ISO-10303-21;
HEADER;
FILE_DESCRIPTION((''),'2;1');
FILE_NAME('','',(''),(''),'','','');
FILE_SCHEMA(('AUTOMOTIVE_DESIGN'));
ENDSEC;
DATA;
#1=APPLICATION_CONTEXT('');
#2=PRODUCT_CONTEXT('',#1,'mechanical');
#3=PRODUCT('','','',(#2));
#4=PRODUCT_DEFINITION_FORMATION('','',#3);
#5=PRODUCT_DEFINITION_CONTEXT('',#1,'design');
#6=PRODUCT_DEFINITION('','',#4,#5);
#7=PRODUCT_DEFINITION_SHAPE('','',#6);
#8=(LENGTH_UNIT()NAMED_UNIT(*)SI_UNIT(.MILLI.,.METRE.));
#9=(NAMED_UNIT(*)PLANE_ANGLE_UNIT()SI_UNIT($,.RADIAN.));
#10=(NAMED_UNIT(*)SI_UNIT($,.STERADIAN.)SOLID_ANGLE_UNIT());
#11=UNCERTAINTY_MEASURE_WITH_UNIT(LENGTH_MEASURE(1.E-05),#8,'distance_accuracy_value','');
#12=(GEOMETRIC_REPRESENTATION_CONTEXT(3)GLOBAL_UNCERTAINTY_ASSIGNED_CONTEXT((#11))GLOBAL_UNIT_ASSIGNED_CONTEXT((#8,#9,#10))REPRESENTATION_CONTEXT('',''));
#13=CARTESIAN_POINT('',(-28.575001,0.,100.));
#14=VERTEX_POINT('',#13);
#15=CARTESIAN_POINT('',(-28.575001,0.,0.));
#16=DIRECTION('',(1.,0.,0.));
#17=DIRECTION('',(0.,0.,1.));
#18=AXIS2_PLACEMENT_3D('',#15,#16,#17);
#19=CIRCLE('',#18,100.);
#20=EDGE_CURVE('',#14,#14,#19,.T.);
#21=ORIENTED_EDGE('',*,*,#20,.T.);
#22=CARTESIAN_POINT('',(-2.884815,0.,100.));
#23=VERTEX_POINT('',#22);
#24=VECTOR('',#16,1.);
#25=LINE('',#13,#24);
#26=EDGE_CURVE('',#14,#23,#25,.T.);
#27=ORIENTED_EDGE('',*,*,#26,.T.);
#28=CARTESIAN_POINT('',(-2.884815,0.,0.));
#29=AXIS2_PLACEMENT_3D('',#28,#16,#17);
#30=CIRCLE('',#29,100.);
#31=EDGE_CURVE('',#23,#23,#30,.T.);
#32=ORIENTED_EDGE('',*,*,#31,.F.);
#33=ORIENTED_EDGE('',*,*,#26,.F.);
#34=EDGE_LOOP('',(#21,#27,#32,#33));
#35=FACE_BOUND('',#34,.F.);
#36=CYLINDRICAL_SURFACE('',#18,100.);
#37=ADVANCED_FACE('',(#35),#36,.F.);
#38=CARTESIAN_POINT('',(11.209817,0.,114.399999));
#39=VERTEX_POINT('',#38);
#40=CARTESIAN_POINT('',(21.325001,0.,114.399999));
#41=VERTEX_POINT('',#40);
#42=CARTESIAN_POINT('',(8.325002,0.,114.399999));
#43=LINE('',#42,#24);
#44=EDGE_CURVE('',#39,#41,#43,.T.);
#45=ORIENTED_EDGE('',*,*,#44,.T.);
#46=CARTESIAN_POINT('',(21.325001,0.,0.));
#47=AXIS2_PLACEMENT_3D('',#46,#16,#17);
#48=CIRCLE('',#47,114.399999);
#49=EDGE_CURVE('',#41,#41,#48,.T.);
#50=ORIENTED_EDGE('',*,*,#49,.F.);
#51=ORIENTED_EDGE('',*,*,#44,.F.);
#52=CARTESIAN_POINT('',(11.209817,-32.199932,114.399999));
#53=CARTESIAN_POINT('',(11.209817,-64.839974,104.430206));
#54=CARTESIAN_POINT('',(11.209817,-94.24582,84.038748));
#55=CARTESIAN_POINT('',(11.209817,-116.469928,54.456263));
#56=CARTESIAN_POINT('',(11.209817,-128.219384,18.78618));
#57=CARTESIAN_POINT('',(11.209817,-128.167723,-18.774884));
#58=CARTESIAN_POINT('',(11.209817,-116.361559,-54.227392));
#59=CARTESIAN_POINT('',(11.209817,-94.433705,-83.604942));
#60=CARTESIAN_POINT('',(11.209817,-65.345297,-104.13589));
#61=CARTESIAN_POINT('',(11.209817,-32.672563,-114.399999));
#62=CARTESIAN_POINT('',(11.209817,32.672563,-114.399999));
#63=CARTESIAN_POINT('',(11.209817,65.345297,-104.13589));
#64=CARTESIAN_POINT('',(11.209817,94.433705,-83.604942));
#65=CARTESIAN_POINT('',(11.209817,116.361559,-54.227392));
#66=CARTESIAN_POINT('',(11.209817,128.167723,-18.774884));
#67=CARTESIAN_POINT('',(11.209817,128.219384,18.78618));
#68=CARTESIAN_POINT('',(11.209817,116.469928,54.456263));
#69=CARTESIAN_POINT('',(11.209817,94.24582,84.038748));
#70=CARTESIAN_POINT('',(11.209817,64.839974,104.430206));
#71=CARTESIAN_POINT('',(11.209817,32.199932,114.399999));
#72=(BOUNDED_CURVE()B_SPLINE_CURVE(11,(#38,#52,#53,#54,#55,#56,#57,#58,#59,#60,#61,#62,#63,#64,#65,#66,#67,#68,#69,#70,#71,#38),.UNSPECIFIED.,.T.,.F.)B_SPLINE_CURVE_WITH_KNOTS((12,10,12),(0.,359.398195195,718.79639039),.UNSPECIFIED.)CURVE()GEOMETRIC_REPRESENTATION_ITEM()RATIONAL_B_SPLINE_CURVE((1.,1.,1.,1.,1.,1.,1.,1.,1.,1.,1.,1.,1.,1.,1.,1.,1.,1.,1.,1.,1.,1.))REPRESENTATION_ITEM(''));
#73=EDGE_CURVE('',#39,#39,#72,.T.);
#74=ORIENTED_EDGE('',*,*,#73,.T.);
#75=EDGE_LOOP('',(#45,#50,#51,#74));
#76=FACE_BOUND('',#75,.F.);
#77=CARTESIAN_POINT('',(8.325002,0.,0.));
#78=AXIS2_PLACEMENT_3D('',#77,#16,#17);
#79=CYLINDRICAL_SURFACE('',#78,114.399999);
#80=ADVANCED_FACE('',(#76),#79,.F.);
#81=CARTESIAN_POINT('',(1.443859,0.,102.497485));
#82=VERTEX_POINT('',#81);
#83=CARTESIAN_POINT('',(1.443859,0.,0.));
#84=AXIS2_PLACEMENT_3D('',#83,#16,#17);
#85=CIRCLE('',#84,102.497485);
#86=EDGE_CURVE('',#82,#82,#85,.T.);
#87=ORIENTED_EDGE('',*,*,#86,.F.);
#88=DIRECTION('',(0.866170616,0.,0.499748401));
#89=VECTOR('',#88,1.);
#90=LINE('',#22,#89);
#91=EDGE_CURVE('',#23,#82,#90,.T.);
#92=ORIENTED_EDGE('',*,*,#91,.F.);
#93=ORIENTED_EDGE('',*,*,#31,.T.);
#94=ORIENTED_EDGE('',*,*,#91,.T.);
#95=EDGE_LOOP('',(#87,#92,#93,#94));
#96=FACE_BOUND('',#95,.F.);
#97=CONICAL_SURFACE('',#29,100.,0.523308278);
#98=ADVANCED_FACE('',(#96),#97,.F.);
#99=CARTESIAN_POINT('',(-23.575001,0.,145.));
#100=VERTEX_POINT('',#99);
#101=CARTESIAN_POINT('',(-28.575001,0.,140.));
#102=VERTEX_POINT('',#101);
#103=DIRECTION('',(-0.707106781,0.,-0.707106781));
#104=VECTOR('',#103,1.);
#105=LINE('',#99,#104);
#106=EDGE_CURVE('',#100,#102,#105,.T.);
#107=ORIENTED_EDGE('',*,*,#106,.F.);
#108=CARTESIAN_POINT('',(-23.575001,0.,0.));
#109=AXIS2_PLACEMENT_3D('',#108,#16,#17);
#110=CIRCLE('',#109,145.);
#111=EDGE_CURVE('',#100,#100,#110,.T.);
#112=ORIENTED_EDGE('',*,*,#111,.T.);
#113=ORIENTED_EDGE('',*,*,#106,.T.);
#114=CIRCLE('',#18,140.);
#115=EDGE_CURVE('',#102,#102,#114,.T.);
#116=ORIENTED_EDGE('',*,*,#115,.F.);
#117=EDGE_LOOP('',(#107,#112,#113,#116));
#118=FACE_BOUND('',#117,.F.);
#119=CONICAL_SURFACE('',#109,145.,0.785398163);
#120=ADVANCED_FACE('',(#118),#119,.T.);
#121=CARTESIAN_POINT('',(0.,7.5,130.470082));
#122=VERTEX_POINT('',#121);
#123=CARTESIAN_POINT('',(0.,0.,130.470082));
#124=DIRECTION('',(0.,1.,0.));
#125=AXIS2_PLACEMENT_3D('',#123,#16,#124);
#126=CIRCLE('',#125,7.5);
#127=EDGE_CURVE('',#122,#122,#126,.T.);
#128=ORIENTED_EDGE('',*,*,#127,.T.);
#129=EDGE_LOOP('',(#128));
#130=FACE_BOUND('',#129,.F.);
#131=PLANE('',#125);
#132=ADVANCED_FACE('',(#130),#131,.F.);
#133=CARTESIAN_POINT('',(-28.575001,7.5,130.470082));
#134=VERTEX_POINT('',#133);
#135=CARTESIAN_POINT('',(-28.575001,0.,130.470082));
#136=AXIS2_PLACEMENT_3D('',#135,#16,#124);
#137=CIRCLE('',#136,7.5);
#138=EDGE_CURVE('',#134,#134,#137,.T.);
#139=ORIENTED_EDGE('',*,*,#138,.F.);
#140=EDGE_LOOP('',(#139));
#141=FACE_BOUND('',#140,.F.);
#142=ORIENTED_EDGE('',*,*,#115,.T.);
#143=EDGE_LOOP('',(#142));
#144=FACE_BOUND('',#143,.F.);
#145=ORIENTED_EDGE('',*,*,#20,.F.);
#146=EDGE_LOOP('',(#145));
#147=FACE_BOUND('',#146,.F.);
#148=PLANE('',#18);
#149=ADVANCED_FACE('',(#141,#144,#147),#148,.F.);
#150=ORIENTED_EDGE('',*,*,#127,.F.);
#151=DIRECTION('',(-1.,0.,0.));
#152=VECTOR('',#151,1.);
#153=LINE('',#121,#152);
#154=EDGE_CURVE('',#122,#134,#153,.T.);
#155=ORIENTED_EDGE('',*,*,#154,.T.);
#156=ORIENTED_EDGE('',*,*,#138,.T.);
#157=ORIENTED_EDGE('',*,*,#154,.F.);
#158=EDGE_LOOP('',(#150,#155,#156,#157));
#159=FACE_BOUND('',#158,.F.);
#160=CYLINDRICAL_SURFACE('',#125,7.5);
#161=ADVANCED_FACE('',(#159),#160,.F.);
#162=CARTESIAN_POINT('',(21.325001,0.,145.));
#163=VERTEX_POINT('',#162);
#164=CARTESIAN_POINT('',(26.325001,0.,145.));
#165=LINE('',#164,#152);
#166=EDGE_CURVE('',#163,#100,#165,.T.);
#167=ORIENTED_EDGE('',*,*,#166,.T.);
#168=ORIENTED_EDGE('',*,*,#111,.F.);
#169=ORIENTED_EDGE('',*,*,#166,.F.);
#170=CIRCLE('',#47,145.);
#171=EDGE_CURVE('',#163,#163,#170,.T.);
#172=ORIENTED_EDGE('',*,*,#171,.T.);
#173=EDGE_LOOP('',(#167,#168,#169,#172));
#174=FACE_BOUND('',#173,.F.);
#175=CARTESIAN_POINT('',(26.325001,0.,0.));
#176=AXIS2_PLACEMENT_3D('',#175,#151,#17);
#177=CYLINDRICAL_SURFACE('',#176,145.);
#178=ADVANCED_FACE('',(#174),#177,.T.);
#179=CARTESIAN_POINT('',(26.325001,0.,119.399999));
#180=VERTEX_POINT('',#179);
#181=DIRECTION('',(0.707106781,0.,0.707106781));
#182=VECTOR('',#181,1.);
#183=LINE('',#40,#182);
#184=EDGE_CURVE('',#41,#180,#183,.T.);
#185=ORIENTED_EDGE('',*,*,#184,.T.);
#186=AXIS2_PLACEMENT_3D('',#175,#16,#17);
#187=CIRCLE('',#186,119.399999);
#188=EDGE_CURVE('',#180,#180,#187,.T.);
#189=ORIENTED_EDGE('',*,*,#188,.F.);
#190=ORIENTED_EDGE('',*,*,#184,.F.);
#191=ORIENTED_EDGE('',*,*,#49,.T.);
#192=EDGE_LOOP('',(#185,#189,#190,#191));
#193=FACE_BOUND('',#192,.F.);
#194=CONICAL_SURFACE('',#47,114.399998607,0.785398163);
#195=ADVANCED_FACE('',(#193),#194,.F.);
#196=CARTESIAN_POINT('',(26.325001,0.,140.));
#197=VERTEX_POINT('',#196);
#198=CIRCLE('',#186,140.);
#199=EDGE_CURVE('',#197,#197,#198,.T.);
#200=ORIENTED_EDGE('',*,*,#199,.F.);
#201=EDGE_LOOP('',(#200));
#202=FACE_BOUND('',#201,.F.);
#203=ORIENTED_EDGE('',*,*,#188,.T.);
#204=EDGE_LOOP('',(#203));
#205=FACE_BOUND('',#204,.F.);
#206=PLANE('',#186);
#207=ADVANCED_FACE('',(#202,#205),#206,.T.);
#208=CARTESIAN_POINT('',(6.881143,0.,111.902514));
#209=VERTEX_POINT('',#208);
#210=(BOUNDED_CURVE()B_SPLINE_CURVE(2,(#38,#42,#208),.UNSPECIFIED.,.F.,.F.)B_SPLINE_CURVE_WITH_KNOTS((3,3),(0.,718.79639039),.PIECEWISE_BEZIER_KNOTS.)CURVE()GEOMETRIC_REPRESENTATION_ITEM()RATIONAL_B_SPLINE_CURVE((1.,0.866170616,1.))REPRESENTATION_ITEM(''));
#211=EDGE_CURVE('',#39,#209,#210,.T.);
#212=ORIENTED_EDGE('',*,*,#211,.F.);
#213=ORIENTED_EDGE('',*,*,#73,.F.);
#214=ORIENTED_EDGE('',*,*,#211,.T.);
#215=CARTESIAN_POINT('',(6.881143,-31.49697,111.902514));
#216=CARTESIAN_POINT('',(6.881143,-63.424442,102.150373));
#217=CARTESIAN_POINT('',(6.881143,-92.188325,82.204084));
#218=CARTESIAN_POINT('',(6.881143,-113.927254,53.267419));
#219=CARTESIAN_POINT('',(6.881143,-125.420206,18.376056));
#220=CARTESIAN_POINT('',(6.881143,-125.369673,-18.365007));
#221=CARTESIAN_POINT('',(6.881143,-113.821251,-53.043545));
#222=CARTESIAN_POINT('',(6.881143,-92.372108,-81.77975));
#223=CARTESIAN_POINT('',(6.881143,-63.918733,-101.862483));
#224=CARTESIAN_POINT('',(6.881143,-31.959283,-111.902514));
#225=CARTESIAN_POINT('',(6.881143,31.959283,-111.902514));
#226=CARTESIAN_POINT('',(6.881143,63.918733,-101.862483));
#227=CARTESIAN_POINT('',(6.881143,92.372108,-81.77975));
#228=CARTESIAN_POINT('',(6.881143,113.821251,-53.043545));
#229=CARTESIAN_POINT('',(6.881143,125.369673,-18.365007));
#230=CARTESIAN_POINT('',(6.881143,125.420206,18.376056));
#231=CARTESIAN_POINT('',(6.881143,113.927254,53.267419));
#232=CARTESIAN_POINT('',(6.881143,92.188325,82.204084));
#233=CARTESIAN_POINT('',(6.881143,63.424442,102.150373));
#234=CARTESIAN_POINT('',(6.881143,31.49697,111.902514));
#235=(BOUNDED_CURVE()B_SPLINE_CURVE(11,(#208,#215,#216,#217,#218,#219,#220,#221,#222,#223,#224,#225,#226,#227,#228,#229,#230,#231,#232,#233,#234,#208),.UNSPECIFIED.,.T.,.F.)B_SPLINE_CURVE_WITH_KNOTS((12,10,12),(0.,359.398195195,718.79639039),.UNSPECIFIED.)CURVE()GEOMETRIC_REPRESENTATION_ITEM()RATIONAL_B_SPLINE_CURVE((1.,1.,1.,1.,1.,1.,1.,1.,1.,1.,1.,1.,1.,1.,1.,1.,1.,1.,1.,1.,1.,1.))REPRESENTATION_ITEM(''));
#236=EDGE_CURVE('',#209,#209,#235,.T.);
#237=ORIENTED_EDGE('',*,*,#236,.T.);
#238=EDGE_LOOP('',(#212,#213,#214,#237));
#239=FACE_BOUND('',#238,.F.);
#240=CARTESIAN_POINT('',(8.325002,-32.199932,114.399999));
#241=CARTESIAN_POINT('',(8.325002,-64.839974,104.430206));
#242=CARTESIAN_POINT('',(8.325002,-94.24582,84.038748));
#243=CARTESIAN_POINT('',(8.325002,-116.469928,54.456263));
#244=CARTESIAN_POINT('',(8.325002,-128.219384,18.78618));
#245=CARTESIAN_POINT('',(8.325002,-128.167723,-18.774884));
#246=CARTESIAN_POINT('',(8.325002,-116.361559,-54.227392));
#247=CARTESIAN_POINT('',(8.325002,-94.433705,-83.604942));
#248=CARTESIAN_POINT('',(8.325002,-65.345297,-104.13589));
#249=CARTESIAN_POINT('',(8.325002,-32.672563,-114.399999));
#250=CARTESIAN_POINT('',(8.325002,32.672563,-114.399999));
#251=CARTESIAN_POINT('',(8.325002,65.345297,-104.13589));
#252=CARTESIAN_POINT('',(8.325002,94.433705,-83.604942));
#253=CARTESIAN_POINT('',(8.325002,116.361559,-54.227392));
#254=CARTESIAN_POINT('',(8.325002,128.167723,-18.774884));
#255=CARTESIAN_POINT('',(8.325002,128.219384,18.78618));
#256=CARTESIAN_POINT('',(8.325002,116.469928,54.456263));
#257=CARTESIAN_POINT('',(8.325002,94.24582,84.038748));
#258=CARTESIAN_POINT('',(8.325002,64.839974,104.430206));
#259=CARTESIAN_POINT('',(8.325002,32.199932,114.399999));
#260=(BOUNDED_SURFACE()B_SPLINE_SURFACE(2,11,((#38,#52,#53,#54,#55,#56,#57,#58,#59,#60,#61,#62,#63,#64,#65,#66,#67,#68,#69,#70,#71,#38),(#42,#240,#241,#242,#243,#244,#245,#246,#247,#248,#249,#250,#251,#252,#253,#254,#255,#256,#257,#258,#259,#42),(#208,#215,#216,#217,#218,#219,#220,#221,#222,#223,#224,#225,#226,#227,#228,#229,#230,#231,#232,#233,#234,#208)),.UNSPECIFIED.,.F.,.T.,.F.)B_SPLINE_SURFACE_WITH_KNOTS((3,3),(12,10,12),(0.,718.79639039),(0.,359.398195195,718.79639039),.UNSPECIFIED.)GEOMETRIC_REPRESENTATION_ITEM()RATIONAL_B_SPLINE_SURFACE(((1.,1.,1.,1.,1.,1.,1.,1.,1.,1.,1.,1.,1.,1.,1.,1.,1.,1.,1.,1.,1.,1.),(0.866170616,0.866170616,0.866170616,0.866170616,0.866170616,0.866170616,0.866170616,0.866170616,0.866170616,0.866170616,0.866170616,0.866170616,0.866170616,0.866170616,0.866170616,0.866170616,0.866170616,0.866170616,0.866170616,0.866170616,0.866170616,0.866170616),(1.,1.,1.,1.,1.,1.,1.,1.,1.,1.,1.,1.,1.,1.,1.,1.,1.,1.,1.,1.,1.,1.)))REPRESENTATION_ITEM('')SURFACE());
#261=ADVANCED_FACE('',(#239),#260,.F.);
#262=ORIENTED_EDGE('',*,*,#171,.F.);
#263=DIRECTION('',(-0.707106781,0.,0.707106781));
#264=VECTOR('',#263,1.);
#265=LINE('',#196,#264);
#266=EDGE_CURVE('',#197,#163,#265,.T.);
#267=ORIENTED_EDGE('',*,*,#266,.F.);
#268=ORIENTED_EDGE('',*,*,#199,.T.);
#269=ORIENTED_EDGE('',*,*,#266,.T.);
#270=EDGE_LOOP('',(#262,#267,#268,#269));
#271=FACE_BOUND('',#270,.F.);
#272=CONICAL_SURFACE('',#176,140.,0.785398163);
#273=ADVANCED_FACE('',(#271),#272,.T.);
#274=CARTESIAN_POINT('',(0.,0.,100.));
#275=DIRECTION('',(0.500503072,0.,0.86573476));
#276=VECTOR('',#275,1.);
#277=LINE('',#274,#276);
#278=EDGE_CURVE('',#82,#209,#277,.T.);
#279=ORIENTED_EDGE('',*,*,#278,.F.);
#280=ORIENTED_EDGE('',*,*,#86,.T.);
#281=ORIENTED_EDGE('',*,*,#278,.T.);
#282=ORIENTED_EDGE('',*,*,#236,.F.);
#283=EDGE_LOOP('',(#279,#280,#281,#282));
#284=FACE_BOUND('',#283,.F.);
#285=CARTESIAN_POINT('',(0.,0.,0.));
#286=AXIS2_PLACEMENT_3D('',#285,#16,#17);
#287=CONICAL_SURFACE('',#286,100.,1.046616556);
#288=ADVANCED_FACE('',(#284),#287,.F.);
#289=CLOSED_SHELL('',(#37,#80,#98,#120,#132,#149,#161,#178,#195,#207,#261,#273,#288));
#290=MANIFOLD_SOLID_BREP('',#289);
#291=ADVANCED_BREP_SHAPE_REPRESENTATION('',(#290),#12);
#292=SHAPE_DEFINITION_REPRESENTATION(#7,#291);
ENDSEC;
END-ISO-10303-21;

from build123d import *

# Parameters (mm, degrees)
F3_R     = 5
F5_D     = 15
F5_DEPTH = 28.576000561


# Not quite as in the source:
# - a fillet or chamfer that OpenCascade refuses, or shapes differently, is made with other operations: its cross-section is extruded or revolved along the edge and cut away or added


with BuildPart() as f1:
    # F0 (on Front) → F1 (revolve)
    with BuildSketch(Plane.XZ):
        Polygon((26.3250011413, 145), (-27.2249993616, 145), (-28.575000561, 145), (-28.575000561, 100), (0, 100), (8.3250019151, 114.3999986072), (26.3250011413, 114.3999986072), align=None)
    revolve(axis=Axis((-1.3500031339, 0, 0), (1, 0, 0)))

    # F2: chamfer of 5 on 4 edges, made by hand

    # F2_s1 → F2_t2 (revolve, cut)
    with BuildSketch(Plane.XZ):
        Polygon((26.3250011413, 140), (21.3250011413, 145), (26.3250011413, 145), align=None)
    revolve(axis=Axis((26.3250011413, 0, 0), (1, 0, 0)), mode=Mode.SUBTRACT)

    # F2_s3 → F2_t4 (revolve, cut)
    with BuildSketch(Plane.XZ):
        Polygon((21.3250011413, 114.3999986072), (26.3250011413, 119.3999986072), (26.3250011413, 114.3999986072), align=None)
    revolve(axis=Axis((26.3250011413, 0, 0), (1, 0, 0)), mode=Mode.SUBTRACT)

    # F2_s5 → F2_t6 (revolve, cut)
    with BuildSketch(Plane.XZ):
        Polygon((-2.8848150214, 100), (1.4438587798, 102.4974846409), (0, 100), align=None)
    revolve(axis=Axis((0, 0, 0), (1, 0, 0)), mode=Mode.SUBTRACT)

    # F2_s7 → F2_t8 (revolve, cut)
    with BuildSketch(Plane.XZ):
        Polygon((-23.575000561, 145), (-28.575000561, 140), (-28.575000561, 145), align=None)
    revolve(axis=Axis((-28.575000561, 0, 0), (1, 0, 0)), mode=Mode.SUBTRACT)

    # F3
    f3_edges = [f1.edges().sort_by_distance(p)[0] for p in [
        (8.325002, 0, -114.399999),
    ]]
    fillet(f3_edges, radius=F3_R)

    # F5 (through all, one way)
    with BuildSketch(Plane.YZ):
        with Locations((0, 130.4700821638)):
            Circle(F5_D / 2)
    extrude(amount=-F5_DEPTH, mode=Mode.SUBTRACT)


solid = f1.part
